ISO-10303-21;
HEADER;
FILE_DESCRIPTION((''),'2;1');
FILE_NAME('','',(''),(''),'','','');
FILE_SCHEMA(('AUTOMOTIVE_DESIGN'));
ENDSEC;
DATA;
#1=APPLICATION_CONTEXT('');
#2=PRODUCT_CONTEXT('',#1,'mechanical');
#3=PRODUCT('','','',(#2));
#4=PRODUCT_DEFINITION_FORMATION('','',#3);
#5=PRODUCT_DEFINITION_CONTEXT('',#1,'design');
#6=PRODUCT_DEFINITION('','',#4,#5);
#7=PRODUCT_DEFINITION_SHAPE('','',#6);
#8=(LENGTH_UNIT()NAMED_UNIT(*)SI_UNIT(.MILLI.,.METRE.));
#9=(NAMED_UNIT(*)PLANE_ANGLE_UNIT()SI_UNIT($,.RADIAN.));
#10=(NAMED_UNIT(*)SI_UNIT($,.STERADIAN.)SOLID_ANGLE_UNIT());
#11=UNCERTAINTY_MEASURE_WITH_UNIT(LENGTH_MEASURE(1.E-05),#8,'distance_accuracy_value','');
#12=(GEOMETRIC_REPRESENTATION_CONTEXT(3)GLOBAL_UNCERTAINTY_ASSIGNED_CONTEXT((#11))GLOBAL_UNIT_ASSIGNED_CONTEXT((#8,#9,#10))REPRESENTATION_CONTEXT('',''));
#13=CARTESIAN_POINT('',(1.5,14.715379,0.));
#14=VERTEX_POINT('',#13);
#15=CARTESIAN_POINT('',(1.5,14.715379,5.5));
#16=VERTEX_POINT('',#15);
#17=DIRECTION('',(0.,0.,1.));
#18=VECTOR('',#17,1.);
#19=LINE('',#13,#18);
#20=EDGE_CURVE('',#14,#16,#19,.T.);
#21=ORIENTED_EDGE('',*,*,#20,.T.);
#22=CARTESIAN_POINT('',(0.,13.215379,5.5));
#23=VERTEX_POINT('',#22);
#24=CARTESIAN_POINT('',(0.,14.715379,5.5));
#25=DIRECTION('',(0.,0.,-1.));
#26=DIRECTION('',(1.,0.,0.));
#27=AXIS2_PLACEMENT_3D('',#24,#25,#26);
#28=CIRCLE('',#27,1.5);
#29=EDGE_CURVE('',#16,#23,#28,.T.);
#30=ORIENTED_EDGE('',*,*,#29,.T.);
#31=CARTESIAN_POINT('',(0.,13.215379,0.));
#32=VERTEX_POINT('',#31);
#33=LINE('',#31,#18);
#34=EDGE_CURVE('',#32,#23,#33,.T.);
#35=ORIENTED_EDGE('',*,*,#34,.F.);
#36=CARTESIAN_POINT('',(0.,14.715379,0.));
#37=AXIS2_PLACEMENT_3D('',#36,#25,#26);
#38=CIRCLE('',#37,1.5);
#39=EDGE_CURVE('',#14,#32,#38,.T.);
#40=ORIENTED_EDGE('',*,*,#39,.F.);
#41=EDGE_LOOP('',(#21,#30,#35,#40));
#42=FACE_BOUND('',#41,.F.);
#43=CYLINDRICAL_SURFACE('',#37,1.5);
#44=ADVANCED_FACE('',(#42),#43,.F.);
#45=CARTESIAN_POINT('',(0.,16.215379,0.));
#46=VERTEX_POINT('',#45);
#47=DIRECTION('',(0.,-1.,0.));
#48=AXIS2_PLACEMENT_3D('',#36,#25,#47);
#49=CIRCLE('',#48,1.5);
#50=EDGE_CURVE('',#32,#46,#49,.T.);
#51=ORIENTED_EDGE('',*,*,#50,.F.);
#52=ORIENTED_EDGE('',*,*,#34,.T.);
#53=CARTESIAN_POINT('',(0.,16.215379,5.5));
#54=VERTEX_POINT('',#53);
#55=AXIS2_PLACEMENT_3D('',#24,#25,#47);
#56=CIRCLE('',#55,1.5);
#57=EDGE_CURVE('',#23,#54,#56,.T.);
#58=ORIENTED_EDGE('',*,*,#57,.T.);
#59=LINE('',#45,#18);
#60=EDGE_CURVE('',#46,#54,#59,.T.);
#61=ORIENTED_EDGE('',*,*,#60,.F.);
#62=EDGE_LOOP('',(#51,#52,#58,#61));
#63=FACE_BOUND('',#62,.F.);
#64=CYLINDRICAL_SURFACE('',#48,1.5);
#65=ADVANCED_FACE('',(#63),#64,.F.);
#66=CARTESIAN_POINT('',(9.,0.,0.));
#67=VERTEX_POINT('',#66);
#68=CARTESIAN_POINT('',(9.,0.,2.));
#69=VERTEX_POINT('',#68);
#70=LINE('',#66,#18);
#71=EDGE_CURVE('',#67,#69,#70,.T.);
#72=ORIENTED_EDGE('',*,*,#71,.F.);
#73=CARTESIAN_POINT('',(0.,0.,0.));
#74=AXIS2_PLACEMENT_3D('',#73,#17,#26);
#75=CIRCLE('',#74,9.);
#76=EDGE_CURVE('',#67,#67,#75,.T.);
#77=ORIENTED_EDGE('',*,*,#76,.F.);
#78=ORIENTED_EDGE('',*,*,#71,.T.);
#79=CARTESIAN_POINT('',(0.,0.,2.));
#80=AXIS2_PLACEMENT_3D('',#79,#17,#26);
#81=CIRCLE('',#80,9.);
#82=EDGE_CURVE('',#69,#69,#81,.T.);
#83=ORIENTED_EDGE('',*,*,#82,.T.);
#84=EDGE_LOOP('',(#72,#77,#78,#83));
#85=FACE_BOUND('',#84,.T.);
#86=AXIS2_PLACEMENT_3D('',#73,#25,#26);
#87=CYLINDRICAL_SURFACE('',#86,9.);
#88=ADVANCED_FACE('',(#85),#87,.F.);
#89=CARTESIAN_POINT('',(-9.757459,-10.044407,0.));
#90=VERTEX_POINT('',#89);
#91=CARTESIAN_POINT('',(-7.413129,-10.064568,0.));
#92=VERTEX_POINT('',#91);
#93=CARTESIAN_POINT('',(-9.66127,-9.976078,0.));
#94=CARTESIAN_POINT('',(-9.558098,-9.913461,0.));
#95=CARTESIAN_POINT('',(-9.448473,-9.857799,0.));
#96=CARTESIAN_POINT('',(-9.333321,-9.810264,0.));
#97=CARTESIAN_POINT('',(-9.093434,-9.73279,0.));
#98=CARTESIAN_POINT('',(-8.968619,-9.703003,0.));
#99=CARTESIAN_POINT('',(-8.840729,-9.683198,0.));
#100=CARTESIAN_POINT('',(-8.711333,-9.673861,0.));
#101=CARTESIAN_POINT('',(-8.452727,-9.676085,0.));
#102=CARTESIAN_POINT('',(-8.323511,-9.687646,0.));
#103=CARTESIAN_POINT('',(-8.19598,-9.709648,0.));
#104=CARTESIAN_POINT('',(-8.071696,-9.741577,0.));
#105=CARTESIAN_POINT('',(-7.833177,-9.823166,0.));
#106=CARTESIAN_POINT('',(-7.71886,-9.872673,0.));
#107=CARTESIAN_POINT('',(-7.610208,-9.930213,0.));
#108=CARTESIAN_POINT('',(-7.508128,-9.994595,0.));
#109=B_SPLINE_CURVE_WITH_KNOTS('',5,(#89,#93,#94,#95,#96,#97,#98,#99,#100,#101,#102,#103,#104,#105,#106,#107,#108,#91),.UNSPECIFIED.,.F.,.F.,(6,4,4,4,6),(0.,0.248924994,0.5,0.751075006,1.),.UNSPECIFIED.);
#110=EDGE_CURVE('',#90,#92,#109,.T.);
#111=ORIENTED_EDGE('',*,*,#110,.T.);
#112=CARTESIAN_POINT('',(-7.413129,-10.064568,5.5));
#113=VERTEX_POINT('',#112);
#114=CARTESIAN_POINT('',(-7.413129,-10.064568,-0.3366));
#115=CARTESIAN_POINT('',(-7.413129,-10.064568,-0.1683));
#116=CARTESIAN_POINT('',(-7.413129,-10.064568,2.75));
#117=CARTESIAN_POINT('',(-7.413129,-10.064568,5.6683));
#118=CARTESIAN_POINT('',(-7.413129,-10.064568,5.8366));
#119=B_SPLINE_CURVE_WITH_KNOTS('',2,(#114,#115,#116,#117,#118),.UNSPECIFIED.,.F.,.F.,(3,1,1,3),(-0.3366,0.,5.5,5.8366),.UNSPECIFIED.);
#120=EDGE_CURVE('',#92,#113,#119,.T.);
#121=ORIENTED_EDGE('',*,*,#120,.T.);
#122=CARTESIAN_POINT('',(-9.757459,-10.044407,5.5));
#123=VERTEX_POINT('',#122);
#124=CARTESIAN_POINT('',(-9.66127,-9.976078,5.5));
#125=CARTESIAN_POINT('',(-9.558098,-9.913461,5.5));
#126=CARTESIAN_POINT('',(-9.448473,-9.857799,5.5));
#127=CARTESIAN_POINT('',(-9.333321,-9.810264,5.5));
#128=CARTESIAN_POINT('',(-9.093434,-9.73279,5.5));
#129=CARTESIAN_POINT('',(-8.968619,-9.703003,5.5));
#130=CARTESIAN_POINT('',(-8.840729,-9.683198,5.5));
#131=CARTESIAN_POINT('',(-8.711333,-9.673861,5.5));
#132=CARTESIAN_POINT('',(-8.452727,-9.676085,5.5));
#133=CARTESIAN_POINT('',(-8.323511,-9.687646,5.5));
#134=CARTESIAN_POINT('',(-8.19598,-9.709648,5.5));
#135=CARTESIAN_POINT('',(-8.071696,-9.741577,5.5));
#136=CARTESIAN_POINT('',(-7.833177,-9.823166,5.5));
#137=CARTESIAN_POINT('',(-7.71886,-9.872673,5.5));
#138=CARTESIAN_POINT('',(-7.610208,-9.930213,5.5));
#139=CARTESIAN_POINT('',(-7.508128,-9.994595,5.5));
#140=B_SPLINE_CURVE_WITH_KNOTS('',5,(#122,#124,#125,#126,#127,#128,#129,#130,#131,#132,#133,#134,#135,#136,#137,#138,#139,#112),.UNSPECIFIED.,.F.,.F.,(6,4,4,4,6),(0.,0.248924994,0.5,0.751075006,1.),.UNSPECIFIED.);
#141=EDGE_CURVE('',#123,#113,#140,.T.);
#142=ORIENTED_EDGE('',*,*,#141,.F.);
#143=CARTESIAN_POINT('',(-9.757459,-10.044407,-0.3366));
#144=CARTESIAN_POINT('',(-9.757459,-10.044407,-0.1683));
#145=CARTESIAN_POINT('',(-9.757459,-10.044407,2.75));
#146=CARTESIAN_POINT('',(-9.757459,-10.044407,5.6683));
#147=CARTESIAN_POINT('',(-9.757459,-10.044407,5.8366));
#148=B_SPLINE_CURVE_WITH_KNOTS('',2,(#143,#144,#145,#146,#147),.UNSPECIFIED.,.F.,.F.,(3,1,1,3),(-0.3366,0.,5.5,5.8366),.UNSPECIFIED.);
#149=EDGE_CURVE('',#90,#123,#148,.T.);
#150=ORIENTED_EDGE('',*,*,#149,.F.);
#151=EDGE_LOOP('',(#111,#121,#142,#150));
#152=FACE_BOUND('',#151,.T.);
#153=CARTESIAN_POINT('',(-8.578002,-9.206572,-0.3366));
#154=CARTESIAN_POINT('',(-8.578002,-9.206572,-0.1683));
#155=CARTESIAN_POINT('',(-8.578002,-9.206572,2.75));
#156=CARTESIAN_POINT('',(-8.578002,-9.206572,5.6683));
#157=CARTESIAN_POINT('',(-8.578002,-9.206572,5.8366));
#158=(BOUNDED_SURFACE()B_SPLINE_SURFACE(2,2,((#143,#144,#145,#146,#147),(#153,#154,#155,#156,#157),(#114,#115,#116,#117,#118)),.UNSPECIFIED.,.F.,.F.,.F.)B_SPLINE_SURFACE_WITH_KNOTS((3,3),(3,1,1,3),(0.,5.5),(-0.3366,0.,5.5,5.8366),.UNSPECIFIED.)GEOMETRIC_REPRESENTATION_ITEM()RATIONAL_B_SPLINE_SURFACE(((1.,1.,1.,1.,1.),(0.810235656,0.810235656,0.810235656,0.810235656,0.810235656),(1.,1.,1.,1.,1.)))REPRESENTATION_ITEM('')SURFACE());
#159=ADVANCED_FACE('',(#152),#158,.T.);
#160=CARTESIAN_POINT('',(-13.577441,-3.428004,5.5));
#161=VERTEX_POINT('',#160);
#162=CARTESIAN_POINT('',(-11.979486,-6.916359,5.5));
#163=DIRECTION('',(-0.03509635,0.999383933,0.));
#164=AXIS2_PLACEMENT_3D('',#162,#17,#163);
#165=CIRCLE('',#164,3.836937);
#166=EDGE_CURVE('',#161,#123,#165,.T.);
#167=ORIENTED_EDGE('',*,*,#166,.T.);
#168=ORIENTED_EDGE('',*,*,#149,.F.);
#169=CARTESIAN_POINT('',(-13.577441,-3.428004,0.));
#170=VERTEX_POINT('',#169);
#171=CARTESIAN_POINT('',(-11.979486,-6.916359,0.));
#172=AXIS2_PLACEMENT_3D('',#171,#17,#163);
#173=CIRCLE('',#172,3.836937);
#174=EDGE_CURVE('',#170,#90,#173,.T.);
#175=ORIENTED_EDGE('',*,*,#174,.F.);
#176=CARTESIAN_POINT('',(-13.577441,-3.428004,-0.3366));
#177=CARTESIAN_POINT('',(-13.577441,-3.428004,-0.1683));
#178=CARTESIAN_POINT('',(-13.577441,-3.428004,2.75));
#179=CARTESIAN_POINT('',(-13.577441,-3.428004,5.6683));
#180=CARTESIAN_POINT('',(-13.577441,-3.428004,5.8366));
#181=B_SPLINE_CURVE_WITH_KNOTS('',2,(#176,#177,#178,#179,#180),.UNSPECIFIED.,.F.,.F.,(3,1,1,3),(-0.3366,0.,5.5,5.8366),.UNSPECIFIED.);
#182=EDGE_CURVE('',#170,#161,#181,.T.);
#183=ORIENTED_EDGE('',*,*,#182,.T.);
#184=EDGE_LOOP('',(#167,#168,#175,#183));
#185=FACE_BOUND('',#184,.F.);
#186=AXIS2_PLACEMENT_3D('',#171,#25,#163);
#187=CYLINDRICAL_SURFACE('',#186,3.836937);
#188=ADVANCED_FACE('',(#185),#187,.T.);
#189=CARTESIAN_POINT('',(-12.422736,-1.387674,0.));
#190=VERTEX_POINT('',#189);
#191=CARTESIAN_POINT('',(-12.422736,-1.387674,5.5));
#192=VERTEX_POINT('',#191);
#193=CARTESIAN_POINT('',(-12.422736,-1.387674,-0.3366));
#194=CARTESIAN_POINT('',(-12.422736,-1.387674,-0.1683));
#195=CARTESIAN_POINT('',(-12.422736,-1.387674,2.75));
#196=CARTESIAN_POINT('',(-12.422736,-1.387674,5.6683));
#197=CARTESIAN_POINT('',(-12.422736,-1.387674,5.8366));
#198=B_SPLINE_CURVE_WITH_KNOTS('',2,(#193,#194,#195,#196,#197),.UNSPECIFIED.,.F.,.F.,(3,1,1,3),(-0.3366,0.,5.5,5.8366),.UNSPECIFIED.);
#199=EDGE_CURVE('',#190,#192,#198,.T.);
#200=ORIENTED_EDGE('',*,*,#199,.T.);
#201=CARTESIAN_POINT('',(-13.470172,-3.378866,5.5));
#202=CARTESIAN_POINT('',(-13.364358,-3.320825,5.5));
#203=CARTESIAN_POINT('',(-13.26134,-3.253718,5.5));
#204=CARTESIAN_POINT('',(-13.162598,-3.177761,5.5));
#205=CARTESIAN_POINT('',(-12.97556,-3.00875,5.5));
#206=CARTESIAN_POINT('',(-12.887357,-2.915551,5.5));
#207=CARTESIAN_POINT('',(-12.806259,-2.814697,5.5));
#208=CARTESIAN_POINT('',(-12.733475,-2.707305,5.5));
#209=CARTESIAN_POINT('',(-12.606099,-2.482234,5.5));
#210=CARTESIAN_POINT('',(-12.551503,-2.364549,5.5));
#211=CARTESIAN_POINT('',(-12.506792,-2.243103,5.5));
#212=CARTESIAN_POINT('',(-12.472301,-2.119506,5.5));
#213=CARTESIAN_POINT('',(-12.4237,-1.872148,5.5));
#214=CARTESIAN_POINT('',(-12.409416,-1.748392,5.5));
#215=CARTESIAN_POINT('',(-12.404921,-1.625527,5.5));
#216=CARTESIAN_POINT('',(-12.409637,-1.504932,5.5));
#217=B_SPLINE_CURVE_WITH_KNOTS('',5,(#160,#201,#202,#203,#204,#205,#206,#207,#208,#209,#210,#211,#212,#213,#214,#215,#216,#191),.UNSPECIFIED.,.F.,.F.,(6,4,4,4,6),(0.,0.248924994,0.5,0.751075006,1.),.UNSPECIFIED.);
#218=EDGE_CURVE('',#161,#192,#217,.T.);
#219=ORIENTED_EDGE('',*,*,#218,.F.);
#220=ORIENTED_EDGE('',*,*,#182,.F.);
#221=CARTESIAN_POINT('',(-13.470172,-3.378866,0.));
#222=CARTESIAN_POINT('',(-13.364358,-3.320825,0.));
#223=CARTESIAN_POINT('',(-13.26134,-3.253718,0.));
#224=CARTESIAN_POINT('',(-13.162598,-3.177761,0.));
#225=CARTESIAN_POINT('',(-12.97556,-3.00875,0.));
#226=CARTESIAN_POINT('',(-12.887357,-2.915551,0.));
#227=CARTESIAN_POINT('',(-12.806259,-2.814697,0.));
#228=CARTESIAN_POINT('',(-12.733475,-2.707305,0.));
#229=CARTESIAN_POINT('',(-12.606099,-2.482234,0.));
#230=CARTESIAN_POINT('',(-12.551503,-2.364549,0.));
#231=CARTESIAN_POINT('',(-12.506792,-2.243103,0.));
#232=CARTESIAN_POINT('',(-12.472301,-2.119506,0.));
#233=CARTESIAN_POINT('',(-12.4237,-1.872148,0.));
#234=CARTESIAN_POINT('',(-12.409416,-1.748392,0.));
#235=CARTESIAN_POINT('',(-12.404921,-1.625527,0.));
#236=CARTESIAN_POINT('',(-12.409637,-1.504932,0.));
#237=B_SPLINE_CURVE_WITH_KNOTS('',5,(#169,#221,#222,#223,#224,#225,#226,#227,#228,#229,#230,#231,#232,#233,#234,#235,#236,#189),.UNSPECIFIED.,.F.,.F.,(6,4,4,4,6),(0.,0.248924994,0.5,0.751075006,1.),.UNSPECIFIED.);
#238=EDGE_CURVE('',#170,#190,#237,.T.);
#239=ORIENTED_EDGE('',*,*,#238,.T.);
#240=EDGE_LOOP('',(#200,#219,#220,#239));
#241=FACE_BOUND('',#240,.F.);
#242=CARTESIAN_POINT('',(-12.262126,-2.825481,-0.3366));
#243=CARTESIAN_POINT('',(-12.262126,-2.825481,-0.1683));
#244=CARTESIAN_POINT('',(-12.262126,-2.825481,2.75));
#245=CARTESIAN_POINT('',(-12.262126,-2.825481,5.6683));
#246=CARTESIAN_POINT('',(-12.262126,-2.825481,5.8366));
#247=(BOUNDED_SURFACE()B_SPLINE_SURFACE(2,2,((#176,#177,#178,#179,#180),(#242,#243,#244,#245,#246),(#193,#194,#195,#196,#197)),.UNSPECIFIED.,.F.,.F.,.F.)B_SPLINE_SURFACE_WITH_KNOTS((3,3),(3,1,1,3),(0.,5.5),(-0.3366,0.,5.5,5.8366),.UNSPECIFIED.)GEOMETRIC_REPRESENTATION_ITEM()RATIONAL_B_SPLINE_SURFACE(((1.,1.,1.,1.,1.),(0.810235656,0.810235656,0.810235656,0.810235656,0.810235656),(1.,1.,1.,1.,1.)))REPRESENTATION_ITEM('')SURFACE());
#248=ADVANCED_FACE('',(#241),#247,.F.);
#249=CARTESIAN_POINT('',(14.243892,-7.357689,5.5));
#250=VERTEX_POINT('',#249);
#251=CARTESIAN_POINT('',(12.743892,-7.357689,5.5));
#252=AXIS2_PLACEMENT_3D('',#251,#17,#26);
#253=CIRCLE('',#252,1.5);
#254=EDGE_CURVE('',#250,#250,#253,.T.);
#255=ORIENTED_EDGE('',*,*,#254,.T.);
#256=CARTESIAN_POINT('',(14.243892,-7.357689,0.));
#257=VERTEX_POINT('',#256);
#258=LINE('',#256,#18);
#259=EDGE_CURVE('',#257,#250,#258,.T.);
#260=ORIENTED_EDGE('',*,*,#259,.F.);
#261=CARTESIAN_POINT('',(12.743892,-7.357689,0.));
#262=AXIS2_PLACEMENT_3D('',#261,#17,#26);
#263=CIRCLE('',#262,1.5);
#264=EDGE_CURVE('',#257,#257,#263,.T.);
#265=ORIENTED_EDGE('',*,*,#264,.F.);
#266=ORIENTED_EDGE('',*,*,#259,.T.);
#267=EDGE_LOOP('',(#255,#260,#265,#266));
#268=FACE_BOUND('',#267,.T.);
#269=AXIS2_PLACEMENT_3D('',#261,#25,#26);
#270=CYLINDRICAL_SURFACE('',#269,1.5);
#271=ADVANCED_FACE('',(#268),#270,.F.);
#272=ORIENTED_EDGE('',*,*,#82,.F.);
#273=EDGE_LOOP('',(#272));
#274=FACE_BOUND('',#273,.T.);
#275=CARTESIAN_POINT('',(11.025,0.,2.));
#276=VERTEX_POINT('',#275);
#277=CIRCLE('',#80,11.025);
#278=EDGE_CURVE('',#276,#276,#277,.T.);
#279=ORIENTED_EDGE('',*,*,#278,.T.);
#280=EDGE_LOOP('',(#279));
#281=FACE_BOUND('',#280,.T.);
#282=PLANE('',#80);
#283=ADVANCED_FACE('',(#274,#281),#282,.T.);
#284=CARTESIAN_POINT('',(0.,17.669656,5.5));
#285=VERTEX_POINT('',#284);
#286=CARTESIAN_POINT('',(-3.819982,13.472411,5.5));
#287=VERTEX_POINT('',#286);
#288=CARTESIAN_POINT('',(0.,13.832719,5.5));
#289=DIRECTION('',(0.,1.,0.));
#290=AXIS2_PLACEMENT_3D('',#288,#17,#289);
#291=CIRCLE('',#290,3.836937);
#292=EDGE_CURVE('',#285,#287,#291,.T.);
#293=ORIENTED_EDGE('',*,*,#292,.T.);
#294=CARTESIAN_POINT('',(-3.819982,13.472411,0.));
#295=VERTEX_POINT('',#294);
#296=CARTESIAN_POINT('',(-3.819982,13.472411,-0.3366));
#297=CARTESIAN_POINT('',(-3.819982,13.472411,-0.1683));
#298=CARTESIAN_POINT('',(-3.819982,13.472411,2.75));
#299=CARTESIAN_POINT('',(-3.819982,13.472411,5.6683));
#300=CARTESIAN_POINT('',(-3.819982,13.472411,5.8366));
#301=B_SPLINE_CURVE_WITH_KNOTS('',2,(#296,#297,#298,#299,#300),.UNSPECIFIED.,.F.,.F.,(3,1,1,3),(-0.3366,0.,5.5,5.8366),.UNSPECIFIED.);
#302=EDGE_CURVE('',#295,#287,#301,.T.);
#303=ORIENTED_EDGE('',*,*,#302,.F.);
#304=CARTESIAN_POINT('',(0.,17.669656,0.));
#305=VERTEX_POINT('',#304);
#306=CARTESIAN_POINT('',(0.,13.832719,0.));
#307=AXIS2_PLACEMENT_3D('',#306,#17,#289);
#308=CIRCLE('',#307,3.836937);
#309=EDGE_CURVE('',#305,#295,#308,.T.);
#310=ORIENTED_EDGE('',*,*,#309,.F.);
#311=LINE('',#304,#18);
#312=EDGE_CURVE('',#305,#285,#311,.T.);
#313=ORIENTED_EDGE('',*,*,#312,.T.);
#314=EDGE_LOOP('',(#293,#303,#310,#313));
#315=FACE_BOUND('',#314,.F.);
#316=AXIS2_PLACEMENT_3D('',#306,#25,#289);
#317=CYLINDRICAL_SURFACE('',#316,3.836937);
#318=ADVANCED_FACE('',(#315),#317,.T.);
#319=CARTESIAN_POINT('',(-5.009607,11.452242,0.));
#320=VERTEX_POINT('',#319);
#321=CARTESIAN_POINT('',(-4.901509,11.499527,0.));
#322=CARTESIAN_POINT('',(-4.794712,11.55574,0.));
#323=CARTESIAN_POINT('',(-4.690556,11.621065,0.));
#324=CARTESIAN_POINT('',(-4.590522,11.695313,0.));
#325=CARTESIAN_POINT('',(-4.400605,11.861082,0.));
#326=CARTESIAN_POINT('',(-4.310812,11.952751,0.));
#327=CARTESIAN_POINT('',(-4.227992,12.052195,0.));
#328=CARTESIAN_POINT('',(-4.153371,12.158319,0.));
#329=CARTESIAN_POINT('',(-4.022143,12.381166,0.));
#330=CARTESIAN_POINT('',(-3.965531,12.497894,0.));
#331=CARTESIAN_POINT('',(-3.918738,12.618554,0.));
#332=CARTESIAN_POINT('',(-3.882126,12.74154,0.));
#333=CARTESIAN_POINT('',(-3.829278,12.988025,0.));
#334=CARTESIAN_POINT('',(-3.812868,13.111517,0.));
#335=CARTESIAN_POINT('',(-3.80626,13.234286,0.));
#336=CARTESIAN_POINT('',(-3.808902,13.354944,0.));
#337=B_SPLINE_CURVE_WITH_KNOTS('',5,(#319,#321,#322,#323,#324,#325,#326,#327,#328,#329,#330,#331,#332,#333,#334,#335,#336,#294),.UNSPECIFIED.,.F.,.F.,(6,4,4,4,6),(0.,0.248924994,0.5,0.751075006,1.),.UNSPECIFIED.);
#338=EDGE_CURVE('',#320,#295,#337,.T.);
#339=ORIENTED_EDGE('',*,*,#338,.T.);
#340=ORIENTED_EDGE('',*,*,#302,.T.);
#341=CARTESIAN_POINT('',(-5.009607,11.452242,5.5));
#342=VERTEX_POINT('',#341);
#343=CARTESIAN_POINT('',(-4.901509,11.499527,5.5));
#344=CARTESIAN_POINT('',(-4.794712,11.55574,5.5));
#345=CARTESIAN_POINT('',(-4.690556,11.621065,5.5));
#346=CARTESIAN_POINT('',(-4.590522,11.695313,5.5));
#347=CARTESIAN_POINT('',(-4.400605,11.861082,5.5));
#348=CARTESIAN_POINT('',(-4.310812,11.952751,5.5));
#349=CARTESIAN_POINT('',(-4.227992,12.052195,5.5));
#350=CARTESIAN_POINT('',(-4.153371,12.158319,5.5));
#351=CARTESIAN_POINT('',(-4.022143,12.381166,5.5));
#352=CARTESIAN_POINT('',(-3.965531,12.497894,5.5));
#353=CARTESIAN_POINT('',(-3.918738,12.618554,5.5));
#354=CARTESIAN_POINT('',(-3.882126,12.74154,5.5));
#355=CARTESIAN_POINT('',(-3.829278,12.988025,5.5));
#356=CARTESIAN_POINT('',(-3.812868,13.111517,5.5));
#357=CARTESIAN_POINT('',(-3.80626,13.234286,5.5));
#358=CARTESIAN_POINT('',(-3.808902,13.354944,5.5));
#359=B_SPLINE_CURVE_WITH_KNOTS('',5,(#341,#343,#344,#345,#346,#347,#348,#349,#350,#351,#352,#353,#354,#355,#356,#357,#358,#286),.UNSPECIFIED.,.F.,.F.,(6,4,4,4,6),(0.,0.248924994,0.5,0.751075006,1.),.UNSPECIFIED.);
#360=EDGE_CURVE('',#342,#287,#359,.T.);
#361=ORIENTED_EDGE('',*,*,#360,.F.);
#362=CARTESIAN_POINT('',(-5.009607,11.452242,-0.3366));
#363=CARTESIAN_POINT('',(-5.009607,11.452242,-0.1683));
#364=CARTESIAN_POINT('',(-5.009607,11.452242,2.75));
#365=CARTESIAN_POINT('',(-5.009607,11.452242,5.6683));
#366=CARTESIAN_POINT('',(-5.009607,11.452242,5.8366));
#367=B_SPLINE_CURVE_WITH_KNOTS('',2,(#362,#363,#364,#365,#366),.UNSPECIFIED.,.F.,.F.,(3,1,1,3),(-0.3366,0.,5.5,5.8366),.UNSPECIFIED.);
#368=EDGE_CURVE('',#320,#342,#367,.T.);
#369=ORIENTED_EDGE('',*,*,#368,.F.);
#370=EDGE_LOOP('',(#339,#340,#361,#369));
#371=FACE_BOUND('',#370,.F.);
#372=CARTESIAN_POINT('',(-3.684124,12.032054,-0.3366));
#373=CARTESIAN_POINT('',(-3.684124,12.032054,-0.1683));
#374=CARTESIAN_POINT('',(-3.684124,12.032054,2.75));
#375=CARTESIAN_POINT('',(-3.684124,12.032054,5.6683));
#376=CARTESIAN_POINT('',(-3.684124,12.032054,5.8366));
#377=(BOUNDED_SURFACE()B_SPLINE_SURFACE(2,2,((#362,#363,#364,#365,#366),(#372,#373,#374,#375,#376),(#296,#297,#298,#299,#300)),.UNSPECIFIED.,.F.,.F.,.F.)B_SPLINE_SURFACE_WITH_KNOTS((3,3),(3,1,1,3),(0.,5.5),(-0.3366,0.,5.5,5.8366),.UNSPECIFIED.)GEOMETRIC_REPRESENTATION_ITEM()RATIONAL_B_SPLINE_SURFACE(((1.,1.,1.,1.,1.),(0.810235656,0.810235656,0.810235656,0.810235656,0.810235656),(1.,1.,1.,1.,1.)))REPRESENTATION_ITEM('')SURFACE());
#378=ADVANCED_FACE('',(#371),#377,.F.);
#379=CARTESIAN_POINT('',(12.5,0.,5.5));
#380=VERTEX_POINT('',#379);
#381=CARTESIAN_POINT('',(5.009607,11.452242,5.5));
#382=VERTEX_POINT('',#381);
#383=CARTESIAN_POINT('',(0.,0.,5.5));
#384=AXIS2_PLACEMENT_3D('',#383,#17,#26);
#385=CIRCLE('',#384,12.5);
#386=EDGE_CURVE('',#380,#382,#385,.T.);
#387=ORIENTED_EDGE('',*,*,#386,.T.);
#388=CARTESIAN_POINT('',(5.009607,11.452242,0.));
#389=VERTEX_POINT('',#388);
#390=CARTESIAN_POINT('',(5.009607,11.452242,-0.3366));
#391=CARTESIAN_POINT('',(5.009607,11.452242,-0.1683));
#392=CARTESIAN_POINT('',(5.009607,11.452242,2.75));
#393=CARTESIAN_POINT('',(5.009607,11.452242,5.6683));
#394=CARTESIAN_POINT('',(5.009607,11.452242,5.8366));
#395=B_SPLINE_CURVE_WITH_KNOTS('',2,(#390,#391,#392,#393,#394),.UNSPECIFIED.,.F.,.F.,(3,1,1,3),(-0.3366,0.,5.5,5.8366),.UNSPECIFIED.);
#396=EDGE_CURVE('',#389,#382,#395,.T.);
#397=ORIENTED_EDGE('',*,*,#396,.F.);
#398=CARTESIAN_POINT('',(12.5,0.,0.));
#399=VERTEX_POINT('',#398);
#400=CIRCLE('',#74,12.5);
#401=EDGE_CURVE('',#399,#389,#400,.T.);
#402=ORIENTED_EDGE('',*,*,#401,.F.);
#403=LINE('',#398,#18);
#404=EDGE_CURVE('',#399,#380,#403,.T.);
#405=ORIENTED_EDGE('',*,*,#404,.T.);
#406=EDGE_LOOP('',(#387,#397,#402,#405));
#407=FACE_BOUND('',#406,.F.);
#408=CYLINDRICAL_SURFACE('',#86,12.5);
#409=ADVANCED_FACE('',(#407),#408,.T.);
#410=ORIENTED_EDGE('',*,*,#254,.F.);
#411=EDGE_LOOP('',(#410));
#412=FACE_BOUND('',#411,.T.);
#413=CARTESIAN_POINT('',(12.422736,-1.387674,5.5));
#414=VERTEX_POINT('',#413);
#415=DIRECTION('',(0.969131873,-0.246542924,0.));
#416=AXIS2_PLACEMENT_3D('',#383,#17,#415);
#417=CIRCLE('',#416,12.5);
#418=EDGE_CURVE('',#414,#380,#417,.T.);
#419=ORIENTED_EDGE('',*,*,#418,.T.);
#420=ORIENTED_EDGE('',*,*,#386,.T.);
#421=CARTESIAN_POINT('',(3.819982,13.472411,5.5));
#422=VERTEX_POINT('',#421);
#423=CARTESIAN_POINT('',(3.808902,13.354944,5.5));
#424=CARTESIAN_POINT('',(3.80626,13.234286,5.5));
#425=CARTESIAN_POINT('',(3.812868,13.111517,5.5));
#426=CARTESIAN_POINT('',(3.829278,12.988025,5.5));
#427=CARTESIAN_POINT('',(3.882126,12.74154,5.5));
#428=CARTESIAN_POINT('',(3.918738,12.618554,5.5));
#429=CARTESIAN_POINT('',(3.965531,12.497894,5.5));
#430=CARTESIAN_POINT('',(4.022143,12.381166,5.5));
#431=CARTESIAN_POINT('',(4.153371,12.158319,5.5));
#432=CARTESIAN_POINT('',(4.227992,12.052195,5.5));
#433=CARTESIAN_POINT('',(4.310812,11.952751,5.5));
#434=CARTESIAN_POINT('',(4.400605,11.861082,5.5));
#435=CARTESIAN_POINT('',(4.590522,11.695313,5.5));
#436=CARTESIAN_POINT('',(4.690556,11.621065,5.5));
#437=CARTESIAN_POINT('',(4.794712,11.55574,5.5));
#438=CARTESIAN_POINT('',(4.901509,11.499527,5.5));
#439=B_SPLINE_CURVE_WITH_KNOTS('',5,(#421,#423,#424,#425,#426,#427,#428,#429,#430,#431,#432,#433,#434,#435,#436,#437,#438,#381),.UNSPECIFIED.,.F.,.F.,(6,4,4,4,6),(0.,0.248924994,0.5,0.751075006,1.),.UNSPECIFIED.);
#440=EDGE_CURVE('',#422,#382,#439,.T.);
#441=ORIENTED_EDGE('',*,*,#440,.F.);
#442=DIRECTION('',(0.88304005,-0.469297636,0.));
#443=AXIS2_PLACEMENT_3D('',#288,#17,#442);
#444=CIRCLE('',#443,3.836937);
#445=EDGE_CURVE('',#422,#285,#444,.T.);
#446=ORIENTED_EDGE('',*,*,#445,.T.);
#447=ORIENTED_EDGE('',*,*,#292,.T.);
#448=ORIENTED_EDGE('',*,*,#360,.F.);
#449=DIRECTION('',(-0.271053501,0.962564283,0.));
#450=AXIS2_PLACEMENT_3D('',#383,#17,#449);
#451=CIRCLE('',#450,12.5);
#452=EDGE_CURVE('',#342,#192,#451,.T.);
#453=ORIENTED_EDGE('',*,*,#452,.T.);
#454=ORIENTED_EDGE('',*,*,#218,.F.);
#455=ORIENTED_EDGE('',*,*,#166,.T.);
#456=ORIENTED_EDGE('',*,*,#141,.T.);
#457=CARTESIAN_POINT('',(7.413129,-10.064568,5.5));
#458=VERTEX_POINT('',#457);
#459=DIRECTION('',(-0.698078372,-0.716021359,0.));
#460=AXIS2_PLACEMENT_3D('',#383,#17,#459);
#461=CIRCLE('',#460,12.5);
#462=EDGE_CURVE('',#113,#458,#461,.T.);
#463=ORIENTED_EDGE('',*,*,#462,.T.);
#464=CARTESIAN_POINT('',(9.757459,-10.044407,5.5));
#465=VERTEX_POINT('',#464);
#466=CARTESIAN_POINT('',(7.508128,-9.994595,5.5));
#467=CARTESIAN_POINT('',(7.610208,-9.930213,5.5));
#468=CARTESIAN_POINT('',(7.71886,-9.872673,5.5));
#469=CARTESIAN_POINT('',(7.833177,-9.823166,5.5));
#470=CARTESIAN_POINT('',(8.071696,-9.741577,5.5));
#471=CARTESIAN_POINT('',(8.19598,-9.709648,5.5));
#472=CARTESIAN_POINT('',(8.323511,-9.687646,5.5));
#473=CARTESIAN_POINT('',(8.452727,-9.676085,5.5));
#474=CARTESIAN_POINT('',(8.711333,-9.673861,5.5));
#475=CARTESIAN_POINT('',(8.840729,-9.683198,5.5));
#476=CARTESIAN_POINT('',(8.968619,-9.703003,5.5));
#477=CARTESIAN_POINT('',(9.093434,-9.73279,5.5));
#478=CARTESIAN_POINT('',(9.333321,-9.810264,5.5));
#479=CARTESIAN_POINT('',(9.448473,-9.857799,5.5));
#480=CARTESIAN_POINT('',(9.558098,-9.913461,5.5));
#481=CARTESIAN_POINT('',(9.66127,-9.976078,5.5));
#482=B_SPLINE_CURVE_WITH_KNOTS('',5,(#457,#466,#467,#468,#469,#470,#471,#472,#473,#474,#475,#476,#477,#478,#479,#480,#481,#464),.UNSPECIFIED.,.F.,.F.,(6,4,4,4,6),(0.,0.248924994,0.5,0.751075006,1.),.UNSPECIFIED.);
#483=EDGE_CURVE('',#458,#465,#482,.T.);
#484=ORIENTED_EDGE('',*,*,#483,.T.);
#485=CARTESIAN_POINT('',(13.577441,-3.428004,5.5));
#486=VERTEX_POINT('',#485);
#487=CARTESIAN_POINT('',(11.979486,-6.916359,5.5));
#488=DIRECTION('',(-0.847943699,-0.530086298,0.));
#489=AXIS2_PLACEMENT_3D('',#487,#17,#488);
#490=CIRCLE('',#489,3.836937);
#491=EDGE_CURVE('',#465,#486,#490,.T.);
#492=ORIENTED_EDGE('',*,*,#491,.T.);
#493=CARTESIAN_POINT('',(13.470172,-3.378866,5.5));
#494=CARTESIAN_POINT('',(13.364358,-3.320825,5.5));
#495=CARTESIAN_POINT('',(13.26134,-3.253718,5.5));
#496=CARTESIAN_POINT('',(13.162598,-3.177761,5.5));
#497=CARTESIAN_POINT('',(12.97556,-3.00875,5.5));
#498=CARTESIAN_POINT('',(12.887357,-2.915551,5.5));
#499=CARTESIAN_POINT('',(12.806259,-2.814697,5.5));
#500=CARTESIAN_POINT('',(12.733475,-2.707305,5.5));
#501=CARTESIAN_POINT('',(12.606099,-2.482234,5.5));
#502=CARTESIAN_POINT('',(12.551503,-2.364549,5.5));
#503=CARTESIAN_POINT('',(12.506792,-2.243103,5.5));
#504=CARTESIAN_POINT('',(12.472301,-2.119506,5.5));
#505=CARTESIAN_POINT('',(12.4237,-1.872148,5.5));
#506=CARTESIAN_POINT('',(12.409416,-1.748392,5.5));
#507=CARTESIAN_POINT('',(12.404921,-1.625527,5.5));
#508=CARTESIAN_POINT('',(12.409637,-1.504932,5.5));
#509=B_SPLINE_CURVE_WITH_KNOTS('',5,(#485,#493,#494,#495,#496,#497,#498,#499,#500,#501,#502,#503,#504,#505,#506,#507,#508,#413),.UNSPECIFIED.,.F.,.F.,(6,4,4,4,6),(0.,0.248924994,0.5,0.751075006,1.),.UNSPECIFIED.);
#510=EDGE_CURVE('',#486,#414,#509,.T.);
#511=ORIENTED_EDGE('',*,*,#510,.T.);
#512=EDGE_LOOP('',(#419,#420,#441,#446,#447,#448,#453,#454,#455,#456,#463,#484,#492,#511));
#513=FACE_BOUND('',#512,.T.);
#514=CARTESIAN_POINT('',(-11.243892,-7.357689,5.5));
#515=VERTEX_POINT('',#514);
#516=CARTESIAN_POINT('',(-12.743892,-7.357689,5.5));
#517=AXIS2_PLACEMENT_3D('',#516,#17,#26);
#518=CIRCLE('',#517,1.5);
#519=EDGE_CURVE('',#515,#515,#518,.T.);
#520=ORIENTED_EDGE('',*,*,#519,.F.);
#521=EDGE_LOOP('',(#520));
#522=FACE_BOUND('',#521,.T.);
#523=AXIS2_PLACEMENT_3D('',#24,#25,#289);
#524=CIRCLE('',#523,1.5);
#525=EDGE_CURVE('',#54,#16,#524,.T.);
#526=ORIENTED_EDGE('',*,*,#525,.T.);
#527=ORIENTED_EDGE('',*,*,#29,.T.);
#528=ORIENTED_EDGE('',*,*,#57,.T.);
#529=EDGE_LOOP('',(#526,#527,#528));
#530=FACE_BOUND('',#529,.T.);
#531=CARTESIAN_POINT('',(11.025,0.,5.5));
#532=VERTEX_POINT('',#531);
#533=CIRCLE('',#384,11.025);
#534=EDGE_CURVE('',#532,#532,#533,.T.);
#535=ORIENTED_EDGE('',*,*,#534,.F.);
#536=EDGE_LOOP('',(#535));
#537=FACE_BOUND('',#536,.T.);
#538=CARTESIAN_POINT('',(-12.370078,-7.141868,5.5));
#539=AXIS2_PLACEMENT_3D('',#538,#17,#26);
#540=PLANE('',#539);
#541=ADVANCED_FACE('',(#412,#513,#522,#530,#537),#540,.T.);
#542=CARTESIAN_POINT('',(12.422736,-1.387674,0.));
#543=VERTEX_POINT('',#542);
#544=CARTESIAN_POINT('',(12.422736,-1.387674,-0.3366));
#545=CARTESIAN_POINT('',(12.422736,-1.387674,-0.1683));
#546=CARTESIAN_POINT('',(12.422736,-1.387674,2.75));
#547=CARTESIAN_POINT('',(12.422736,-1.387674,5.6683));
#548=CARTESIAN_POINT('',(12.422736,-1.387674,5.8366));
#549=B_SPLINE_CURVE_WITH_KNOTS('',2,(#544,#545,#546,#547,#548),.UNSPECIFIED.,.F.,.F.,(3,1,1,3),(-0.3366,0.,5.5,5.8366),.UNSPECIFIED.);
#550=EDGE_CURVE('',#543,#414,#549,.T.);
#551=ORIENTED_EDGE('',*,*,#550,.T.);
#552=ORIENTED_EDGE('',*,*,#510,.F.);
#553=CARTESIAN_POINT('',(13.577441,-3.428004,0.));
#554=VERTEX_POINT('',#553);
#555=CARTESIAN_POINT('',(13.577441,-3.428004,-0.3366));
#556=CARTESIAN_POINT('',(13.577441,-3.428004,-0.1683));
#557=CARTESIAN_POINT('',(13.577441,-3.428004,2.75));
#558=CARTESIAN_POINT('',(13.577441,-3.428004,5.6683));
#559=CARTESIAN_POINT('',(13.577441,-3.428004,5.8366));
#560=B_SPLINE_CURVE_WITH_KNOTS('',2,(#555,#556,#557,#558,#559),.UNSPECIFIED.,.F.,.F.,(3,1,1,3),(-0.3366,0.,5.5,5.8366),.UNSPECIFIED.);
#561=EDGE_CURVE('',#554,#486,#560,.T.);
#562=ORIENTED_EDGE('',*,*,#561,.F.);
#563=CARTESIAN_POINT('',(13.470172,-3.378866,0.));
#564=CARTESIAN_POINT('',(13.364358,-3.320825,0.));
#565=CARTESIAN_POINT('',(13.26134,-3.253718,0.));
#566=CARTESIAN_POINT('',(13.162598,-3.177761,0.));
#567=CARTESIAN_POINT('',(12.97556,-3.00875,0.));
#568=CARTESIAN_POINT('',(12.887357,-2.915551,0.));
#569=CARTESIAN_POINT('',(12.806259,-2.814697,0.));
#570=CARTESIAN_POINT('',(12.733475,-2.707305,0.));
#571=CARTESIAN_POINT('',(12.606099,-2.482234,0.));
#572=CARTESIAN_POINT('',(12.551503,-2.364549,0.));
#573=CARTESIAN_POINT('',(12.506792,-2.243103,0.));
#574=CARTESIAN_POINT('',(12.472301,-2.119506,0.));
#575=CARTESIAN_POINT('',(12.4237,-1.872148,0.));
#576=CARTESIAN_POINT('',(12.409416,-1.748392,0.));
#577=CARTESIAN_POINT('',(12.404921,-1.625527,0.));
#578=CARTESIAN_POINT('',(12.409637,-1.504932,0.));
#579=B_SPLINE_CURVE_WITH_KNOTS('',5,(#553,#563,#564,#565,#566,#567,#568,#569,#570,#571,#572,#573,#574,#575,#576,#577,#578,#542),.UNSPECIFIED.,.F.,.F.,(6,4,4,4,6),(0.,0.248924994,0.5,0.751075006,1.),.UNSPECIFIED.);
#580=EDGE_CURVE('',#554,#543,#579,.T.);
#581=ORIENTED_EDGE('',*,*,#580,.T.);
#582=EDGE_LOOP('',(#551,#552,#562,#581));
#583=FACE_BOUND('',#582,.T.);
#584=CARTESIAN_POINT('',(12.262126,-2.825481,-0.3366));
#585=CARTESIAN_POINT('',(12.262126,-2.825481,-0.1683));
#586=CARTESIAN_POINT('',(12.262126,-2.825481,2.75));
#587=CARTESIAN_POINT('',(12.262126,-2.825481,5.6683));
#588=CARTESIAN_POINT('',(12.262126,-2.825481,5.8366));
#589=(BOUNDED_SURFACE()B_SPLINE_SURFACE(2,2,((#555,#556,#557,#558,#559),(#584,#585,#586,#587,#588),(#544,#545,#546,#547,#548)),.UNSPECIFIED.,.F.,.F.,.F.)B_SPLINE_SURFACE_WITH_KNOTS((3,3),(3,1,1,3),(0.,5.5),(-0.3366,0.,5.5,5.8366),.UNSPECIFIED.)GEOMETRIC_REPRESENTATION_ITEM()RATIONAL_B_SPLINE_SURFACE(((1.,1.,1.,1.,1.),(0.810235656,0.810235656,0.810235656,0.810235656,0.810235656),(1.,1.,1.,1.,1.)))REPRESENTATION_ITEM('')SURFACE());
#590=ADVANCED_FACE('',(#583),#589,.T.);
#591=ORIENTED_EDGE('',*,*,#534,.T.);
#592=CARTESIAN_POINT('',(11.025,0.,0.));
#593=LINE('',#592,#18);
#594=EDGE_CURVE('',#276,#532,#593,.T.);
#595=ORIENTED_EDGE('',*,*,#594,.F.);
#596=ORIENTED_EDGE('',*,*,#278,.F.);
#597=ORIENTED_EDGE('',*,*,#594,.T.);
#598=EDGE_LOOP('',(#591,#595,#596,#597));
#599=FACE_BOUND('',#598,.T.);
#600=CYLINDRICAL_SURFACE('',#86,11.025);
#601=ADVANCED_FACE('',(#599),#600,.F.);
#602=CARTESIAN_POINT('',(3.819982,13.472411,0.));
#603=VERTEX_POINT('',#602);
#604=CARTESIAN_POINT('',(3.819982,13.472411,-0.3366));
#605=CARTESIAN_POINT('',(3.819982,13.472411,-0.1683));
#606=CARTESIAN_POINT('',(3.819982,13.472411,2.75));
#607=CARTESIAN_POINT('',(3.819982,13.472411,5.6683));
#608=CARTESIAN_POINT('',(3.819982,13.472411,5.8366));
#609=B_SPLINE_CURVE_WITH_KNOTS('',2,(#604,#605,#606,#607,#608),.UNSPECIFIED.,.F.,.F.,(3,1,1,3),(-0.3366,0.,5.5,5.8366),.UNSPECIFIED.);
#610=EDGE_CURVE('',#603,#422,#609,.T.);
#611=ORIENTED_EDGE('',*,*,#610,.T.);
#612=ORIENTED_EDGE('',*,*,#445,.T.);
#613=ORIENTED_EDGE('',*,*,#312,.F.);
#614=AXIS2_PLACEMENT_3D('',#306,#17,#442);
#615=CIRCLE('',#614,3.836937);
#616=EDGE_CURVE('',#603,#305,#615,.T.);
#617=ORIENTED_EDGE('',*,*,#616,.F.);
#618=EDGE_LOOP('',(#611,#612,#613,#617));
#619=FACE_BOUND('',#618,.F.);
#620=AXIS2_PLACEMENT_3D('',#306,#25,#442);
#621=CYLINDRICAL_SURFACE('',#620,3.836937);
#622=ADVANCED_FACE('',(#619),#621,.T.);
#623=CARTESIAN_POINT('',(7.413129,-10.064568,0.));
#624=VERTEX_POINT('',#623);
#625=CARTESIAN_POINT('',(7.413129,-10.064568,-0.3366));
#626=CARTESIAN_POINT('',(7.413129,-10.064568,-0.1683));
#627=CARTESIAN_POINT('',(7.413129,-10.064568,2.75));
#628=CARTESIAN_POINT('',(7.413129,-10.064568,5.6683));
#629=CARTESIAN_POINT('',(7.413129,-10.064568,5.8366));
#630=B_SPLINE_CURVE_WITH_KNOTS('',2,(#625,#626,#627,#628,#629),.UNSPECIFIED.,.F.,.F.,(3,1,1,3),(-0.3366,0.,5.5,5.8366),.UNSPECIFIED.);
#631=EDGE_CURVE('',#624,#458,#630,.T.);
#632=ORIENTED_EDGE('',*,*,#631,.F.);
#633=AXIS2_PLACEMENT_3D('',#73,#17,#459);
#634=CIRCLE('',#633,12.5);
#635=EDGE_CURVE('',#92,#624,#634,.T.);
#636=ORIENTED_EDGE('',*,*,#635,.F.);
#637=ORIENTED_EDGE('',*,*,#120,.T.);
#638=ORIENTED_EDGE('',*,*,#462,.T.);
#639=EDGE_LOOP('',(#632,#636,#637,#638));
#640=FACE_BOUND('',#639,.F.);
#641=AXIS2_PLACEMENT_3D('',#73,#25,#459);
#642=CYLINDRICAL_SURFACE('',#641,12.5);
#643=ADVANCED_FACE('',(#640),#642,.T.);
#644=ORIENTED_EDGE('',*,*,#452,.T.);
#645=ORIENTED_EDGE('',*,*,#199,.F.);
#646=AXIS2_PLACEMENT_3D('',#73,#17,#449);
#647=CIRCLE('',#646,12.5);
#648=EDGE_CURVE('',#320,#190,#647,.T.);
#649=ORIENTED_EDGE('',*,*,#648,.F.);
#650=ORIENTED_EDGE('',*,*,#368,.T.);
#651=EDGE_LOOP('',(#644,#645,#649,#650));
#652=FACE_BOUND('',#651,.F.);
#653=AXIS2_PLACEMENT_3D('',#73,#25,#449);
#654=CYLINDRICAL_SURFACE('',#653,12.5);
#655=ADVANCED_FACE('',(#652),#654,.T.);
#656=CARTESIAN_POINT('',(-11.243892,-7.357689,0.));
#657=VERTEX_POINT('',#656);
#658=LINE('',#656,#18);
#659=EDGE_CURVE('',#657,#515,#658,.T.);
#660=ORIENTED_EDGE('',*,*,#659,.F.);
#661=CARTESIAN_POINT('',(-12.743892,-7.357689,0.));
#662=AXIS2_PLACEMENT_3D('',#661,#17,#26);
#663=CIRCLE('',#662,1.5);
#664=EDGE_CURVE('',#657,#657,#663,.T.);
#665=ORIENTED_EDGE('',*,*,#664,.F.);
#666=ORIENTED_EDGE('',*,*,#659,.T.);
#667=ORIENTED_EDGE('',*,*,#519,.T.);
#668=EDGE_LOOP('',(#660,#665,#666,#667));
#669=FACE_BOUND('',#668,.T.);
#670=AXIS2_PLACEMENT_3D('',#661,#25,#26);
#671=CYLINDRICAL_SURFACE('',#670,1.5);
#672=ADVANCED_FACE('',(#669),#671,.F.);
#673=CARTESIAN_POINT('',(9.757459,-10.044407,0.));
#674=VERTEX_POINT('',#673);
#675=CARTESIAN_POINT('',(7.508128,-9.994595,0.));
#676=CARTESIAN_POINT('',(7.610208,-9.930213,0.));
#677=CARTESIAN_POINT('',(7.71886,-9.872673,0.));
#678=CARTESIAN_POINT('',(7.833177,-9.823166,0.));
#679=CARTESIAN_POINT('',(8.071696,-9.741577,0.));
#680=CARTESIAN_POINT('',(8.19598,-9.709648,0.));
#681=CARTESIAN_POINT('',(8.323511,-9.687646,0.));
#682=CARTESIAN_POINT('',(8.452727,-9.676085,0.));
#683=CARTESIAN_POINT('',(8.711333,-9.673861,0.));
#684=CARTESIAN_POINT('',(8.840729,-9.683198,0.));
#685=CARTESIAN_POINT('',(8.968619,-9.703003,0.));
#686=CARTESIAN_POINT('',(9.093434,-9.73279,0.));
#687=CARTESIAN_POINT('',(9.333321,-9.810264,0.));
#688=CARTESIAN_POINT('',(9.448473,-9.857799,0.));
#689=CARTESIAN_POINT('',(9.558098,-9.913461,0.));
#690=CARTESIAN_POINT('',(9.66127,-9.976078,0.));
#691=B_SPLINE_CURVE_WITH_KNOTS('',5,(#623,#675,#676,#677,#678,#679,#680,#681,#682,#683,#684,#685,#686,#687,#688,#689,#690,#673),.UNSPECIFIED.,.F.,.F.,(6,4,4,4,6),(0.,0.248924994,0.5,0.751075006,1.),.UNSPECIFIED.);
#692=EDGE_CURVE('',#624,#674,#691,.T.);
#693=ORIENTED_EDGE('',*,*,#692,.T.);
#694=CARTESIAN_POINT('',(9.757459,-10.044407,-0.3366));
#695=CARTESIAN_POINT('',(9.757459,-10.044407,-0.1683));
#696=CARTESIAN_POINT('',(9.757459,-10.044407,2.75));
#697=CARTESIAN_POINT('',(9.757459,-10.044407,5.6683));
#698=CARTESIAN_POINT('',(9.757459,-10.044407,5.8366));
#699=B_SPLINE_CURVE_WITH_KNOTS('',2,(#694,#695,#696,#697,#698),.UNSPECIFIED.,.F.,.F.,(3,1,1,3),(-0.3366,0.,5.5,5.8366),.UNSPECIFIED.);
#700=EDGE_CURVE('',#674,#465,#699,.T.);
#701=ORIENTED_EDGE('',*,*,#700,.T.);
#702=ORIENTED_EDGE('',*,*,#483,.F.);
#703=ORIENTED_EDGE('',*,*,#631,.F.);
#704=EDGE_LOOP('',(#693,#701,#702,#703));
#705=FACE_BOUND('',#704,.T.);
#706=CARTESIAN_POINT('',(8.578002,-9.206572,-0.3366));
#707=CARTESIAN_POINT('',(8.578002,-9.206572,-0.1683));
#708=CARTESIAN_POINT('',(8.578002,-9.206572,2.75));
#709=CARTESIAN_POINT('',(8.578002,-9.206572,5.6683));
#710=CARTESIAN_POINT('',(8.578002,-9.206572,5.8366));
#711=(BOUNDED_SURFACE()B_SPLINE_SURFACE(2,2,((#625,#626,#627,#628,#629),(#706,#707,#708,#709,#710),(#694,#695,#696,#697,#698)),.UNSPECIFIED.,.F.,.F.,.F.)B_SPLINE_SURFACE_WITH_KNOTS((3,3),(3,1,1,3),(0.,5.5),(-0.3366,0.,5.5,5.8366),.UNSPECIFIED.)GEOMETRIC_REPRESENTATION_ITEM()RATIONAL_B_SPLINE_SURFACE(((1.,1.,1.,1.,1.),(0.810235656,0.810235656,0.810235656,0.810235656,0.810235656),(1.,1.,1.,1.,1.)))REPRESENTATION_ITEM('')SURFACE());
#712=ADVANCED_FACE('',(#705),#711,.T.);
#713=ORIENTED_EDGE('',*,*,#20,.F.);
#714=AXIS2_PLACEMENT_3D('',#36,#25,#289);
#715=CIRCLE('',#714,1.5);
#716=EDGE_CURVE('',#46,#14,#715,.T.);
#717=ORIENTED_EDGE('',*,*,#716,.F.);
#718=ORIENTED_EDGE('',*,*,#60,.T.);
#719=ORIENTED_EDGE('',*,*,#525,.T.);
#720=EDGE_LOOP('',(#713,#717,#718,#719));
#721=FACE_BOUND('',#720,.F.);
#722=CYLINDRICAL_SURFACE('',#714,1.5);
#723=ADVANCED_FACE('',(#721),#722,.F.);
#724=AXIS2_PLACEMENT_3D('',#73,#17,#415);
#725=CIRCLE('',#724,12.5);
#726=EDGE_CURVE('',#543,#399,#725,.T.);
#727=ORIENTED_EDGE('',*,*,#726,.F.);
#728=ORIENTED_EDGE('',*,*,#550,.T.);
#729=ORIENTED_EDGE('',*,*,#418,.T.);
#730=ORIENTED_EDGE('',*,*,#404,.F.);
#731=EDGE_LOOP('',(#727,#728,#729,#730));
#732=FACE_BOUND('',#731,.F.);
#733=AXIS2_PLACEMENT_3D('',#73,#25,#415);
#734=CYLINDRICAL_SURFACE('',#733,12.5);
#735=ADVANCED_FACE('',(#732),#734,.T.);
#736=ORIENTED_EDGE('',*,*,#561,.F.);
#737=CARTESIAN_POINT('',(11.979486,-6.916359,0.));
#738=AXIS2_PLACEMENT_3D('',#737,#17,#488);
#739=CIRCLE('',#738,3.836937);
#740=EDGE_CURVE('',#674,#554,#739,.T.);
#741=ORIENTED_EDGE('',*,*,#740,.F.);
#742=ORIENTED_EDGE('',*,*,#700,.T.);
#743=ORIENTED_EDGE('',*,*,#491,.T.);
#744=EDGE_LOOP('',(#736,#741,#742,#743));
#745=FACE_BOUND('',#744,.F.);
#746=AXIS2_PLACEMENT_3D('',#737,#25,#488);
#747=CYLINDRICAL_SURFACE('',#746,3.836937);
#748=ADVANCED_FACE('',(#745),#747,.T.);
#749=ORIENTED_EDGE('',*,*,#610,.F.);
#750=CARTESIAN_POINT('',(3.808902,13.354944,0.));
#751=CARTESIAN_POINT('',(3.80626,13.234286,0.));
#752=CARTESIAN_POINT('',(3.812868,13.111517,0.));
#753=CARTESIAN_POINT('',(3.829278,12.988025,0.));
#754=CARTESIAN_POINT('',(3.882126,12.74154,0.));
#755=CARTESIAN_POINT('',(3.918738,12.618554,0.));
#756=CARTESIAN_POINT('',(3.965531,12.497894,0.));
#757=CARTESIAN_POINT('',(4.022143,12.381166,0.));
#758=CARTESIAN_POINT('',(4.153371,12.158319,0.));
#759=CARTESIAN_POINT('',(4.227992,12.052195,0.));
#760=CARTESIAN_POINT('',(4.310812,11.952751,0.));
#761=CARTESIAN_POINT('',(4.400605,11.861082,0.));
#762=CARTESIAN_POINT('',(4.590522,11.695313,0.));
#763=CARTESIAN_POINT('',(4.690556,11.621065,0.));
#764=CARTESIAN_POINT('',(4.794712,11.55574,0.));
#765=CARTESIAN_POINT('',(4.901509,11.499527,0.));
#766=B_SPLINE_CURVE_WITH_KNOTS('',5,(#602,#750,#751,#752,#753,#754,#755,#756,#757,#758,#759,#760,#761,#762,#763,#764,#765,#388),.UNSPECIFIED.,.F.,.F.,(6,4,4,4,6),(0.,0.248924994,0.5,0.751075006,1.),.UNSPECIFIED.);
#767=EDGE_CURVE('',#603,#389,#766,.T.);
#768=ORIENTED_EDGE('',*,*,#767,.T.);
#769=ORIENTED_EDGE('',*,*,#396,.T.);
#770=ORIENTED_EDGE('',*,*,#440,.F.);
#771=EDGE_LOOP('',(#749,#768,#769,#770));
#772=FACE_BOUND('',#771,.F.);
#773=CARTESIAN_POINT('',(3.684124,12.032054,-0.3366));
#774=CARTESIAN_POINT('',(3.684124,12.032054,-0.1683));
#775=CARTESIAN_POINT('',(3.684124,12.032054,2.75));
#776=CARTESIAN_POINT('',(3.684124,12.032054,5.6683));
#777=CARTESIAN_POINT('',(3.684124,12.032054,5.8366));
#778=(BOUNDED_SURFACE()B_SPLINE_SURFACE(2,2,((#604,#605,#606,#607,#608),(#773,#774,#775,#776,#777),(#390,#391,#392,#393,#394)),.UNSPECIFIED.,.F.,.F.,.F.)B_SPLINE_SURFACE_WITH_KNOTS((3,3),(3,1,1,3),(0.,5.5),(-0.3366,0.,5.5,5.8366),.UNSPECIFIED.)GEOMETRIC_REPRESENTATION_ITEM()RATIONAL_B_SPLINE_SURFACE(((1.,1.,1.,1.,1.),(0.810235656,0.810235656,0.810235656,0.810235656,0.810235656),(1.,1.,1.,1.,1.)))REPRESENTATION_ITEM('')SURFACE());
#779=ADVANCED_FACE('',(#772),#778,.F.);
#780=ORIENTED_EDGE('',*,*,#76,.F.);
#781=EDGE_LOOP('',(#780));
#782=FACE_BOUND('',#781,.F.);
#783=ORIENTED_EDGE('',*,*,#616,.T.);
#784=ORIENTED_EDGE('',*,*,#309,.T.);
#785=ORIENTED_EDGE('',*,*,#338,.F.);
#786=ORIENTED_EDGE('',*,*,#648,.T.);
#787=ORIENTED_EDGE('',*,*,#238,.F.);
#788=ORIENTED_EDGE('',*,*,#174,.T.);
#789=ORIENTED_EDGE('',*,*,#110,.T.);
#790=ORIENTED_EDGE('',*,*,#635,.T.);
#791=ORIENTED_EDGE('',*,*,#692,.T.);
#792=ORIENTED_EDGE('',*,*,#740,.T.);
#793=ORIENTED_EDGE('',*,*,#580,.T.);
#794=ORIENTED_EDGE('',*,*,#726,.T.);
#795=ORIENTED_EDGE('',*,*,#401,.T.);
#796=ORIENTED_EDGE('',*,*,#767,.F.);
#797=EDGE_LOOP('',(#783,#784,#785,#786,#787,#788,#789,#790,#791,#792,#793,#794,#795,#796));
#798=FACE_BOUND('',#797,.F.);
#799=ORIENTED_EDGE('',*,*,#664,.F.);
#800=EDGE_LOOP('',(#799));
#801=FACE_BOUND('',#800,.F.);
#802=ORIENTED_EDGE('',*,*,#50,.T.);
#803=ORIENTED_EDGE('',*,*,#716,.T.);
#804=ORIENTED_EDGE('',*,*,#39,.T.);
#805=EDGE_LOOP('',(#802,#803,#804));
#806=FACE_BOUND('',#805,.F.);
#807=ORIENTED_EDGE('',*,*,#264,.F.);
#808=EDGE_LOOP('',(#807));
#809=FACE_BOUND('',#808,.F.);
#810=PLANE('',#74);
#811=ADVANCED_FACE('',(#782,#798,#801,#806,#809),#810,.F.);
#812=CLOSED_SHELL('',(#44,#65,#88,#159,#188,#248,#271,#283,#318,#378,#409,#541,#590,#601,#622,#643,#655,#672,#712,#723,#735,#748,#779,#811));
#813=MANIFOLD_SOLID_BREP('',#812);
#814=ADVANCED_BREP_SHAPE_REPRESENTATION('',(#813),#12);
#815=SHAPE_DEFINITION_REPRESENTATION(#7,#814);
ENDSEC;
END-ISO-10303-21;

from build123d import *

# Parameters (mm, degrees)
F0_R     = 1.5
F0_R_2   = 11.025
F1_DEPTH = 5.5
F0_R_3   = 9
F2_DEPTH = 2
F3_R     = 2


with BuildPart() as f1:
    # F0 (on Top) → F1 (new body)
    with BuildSketch(Plane.XY):
        with BuildLine():
            ThreePointArc((-12.1141484076, -3.0817865531), (-15.3023705753, -8.8348277709), (-8.7259796478, -8.9502669896))
            ThreePointArc((-8.7259796478, -8.9502669896), (-10.8253175473, -6.25), (-12.1141484076, -3.0817865531))
        make_face()
        with Locations((-12.7438917843, -7.3576893522)):
            Circle(F0_R, mode=Mode.SUBTRACT)
        with BuildLine():
            ThreePointArc((12.1141484076, -3.0817865531), (12.403161998, -1.5529238399), (12.5, 0))
            ThreePointArc((12.5, 0), (9.9649914575, 7.5464524945), (3.3881687598, 12.0320535427))
            ThreePointArc((3.3881687598, 12.0320535427), (1.7101653013, 12.3824607668), (0, 12.5))
            ThreePointArc((0, 12.5), (-1.7101653013, 12.3824607668), (-3.3881687598, 12.0320535427))
            ThreePointArc((-3.3881687598, 12.0320535427), (-10.8253175473, 6.25), (-12.1141484076, -3.0817865531))
            ThreePointArc((-12.1141484076, -3.0817865531), (-10.8253175473, -6.25), (-8.7259796478, -8.9502669896))
            ThreePointArc((-8.7259796478, -8.9502669896), (0, -12.5), (8.7259796478, -8.9502669896))
            ThreePointArc((8.7259796478, -8.9502669896), (10.8253175473, -6.25), (12.1141484076, -3.0817865531))
        make_face()
        Circle(F0_R_2, mode=Mode.SUBTRACT)
        with BuildLine():
            ThreePointArc((-3.3881687598, 12.0320535427), (-1.7101653013, 12.3824607668), (0, 12.5))
            Line((0, 12.5), (0, 13.2153787043))
            ThreePointArc((0, 13.2153787043), (-1.5, 14.7153787043), (0, 16.2153787043))
            Line((0, 16.2153787043), (0, 16.9307574087))
            Line((0, 16.9307574087), (0, 17.6696555418))
            ThreePointArc((0, 17.6696555418), (-3.2887020177, 15.8092112452), (-3.3881687598, 12.0320535427))
        make_face()
        with BuildLine():
            ThreePointArc((0, 12.5), (1.7101653013, 12.3824607668), (3.3881687598, 12.0320535427))
            ThreePointArc((3.3881687598, 12.0320535427), (3.2887020177, 15.8092112452), (0, 17.6696555418))
            Line((0, 17.6696555418), (0, 16.9307574087))
            Line((0, 16.9307574087), (0, 16.2153787043))
            ThreePointArc((0, 16.2153787043), (1.0606601718, 15.7760388761), (1.5, 14.7153787043))
            ThreePointArc((1.5, 14.7153787043), (1.0606601718, 13.6547185326), (0, 13.2153787043))
            Line((0, 13.2153787043), (0, 12.5))
        make_face()
        with BuildLine():
            ThreePointArc((8.7259796478, -8.9502669896), (15.3023705753, -8.8348277709), (12.1141484076, -3.0817865531))
            ThreePointArc((12.1141484076, -3.0817865531), (10.8253175473, -6.25), (8.7259796478, -8.9502669896))
        make_face()
        with Locations((12.7438917843, -7.3576893522)):
            Circle(F0_R, mode=Mode.SUBTRACT)
    extrude(amount=F1_DEPTH)

    # F0 (on Top) → F2 (join)
    with BuildSketch(Plane.XY):
        Circle(F0_R_2)
        Circle(F0_R_3, mode=Mode.SUBTRACT)
    extrude(amount=F2_DEPTH)

    # F3
    f3_edges = [f1.edges().sort_by_distance(p)[0] for p in [
        (3.388169, 12.032054, 2.75),
        (8.72598, -8.950267, 2.75),
        (-12.114148, -3.081787, 2.75),
        (-8.72598, -8.950267, 2.75),
        (-3.388169, 12.032054, 2.75),
        (12.114148, -3.081787, 2.75),
    ]]
    fillet(f3_edges, radius=F3_R)


solid = f1.part
